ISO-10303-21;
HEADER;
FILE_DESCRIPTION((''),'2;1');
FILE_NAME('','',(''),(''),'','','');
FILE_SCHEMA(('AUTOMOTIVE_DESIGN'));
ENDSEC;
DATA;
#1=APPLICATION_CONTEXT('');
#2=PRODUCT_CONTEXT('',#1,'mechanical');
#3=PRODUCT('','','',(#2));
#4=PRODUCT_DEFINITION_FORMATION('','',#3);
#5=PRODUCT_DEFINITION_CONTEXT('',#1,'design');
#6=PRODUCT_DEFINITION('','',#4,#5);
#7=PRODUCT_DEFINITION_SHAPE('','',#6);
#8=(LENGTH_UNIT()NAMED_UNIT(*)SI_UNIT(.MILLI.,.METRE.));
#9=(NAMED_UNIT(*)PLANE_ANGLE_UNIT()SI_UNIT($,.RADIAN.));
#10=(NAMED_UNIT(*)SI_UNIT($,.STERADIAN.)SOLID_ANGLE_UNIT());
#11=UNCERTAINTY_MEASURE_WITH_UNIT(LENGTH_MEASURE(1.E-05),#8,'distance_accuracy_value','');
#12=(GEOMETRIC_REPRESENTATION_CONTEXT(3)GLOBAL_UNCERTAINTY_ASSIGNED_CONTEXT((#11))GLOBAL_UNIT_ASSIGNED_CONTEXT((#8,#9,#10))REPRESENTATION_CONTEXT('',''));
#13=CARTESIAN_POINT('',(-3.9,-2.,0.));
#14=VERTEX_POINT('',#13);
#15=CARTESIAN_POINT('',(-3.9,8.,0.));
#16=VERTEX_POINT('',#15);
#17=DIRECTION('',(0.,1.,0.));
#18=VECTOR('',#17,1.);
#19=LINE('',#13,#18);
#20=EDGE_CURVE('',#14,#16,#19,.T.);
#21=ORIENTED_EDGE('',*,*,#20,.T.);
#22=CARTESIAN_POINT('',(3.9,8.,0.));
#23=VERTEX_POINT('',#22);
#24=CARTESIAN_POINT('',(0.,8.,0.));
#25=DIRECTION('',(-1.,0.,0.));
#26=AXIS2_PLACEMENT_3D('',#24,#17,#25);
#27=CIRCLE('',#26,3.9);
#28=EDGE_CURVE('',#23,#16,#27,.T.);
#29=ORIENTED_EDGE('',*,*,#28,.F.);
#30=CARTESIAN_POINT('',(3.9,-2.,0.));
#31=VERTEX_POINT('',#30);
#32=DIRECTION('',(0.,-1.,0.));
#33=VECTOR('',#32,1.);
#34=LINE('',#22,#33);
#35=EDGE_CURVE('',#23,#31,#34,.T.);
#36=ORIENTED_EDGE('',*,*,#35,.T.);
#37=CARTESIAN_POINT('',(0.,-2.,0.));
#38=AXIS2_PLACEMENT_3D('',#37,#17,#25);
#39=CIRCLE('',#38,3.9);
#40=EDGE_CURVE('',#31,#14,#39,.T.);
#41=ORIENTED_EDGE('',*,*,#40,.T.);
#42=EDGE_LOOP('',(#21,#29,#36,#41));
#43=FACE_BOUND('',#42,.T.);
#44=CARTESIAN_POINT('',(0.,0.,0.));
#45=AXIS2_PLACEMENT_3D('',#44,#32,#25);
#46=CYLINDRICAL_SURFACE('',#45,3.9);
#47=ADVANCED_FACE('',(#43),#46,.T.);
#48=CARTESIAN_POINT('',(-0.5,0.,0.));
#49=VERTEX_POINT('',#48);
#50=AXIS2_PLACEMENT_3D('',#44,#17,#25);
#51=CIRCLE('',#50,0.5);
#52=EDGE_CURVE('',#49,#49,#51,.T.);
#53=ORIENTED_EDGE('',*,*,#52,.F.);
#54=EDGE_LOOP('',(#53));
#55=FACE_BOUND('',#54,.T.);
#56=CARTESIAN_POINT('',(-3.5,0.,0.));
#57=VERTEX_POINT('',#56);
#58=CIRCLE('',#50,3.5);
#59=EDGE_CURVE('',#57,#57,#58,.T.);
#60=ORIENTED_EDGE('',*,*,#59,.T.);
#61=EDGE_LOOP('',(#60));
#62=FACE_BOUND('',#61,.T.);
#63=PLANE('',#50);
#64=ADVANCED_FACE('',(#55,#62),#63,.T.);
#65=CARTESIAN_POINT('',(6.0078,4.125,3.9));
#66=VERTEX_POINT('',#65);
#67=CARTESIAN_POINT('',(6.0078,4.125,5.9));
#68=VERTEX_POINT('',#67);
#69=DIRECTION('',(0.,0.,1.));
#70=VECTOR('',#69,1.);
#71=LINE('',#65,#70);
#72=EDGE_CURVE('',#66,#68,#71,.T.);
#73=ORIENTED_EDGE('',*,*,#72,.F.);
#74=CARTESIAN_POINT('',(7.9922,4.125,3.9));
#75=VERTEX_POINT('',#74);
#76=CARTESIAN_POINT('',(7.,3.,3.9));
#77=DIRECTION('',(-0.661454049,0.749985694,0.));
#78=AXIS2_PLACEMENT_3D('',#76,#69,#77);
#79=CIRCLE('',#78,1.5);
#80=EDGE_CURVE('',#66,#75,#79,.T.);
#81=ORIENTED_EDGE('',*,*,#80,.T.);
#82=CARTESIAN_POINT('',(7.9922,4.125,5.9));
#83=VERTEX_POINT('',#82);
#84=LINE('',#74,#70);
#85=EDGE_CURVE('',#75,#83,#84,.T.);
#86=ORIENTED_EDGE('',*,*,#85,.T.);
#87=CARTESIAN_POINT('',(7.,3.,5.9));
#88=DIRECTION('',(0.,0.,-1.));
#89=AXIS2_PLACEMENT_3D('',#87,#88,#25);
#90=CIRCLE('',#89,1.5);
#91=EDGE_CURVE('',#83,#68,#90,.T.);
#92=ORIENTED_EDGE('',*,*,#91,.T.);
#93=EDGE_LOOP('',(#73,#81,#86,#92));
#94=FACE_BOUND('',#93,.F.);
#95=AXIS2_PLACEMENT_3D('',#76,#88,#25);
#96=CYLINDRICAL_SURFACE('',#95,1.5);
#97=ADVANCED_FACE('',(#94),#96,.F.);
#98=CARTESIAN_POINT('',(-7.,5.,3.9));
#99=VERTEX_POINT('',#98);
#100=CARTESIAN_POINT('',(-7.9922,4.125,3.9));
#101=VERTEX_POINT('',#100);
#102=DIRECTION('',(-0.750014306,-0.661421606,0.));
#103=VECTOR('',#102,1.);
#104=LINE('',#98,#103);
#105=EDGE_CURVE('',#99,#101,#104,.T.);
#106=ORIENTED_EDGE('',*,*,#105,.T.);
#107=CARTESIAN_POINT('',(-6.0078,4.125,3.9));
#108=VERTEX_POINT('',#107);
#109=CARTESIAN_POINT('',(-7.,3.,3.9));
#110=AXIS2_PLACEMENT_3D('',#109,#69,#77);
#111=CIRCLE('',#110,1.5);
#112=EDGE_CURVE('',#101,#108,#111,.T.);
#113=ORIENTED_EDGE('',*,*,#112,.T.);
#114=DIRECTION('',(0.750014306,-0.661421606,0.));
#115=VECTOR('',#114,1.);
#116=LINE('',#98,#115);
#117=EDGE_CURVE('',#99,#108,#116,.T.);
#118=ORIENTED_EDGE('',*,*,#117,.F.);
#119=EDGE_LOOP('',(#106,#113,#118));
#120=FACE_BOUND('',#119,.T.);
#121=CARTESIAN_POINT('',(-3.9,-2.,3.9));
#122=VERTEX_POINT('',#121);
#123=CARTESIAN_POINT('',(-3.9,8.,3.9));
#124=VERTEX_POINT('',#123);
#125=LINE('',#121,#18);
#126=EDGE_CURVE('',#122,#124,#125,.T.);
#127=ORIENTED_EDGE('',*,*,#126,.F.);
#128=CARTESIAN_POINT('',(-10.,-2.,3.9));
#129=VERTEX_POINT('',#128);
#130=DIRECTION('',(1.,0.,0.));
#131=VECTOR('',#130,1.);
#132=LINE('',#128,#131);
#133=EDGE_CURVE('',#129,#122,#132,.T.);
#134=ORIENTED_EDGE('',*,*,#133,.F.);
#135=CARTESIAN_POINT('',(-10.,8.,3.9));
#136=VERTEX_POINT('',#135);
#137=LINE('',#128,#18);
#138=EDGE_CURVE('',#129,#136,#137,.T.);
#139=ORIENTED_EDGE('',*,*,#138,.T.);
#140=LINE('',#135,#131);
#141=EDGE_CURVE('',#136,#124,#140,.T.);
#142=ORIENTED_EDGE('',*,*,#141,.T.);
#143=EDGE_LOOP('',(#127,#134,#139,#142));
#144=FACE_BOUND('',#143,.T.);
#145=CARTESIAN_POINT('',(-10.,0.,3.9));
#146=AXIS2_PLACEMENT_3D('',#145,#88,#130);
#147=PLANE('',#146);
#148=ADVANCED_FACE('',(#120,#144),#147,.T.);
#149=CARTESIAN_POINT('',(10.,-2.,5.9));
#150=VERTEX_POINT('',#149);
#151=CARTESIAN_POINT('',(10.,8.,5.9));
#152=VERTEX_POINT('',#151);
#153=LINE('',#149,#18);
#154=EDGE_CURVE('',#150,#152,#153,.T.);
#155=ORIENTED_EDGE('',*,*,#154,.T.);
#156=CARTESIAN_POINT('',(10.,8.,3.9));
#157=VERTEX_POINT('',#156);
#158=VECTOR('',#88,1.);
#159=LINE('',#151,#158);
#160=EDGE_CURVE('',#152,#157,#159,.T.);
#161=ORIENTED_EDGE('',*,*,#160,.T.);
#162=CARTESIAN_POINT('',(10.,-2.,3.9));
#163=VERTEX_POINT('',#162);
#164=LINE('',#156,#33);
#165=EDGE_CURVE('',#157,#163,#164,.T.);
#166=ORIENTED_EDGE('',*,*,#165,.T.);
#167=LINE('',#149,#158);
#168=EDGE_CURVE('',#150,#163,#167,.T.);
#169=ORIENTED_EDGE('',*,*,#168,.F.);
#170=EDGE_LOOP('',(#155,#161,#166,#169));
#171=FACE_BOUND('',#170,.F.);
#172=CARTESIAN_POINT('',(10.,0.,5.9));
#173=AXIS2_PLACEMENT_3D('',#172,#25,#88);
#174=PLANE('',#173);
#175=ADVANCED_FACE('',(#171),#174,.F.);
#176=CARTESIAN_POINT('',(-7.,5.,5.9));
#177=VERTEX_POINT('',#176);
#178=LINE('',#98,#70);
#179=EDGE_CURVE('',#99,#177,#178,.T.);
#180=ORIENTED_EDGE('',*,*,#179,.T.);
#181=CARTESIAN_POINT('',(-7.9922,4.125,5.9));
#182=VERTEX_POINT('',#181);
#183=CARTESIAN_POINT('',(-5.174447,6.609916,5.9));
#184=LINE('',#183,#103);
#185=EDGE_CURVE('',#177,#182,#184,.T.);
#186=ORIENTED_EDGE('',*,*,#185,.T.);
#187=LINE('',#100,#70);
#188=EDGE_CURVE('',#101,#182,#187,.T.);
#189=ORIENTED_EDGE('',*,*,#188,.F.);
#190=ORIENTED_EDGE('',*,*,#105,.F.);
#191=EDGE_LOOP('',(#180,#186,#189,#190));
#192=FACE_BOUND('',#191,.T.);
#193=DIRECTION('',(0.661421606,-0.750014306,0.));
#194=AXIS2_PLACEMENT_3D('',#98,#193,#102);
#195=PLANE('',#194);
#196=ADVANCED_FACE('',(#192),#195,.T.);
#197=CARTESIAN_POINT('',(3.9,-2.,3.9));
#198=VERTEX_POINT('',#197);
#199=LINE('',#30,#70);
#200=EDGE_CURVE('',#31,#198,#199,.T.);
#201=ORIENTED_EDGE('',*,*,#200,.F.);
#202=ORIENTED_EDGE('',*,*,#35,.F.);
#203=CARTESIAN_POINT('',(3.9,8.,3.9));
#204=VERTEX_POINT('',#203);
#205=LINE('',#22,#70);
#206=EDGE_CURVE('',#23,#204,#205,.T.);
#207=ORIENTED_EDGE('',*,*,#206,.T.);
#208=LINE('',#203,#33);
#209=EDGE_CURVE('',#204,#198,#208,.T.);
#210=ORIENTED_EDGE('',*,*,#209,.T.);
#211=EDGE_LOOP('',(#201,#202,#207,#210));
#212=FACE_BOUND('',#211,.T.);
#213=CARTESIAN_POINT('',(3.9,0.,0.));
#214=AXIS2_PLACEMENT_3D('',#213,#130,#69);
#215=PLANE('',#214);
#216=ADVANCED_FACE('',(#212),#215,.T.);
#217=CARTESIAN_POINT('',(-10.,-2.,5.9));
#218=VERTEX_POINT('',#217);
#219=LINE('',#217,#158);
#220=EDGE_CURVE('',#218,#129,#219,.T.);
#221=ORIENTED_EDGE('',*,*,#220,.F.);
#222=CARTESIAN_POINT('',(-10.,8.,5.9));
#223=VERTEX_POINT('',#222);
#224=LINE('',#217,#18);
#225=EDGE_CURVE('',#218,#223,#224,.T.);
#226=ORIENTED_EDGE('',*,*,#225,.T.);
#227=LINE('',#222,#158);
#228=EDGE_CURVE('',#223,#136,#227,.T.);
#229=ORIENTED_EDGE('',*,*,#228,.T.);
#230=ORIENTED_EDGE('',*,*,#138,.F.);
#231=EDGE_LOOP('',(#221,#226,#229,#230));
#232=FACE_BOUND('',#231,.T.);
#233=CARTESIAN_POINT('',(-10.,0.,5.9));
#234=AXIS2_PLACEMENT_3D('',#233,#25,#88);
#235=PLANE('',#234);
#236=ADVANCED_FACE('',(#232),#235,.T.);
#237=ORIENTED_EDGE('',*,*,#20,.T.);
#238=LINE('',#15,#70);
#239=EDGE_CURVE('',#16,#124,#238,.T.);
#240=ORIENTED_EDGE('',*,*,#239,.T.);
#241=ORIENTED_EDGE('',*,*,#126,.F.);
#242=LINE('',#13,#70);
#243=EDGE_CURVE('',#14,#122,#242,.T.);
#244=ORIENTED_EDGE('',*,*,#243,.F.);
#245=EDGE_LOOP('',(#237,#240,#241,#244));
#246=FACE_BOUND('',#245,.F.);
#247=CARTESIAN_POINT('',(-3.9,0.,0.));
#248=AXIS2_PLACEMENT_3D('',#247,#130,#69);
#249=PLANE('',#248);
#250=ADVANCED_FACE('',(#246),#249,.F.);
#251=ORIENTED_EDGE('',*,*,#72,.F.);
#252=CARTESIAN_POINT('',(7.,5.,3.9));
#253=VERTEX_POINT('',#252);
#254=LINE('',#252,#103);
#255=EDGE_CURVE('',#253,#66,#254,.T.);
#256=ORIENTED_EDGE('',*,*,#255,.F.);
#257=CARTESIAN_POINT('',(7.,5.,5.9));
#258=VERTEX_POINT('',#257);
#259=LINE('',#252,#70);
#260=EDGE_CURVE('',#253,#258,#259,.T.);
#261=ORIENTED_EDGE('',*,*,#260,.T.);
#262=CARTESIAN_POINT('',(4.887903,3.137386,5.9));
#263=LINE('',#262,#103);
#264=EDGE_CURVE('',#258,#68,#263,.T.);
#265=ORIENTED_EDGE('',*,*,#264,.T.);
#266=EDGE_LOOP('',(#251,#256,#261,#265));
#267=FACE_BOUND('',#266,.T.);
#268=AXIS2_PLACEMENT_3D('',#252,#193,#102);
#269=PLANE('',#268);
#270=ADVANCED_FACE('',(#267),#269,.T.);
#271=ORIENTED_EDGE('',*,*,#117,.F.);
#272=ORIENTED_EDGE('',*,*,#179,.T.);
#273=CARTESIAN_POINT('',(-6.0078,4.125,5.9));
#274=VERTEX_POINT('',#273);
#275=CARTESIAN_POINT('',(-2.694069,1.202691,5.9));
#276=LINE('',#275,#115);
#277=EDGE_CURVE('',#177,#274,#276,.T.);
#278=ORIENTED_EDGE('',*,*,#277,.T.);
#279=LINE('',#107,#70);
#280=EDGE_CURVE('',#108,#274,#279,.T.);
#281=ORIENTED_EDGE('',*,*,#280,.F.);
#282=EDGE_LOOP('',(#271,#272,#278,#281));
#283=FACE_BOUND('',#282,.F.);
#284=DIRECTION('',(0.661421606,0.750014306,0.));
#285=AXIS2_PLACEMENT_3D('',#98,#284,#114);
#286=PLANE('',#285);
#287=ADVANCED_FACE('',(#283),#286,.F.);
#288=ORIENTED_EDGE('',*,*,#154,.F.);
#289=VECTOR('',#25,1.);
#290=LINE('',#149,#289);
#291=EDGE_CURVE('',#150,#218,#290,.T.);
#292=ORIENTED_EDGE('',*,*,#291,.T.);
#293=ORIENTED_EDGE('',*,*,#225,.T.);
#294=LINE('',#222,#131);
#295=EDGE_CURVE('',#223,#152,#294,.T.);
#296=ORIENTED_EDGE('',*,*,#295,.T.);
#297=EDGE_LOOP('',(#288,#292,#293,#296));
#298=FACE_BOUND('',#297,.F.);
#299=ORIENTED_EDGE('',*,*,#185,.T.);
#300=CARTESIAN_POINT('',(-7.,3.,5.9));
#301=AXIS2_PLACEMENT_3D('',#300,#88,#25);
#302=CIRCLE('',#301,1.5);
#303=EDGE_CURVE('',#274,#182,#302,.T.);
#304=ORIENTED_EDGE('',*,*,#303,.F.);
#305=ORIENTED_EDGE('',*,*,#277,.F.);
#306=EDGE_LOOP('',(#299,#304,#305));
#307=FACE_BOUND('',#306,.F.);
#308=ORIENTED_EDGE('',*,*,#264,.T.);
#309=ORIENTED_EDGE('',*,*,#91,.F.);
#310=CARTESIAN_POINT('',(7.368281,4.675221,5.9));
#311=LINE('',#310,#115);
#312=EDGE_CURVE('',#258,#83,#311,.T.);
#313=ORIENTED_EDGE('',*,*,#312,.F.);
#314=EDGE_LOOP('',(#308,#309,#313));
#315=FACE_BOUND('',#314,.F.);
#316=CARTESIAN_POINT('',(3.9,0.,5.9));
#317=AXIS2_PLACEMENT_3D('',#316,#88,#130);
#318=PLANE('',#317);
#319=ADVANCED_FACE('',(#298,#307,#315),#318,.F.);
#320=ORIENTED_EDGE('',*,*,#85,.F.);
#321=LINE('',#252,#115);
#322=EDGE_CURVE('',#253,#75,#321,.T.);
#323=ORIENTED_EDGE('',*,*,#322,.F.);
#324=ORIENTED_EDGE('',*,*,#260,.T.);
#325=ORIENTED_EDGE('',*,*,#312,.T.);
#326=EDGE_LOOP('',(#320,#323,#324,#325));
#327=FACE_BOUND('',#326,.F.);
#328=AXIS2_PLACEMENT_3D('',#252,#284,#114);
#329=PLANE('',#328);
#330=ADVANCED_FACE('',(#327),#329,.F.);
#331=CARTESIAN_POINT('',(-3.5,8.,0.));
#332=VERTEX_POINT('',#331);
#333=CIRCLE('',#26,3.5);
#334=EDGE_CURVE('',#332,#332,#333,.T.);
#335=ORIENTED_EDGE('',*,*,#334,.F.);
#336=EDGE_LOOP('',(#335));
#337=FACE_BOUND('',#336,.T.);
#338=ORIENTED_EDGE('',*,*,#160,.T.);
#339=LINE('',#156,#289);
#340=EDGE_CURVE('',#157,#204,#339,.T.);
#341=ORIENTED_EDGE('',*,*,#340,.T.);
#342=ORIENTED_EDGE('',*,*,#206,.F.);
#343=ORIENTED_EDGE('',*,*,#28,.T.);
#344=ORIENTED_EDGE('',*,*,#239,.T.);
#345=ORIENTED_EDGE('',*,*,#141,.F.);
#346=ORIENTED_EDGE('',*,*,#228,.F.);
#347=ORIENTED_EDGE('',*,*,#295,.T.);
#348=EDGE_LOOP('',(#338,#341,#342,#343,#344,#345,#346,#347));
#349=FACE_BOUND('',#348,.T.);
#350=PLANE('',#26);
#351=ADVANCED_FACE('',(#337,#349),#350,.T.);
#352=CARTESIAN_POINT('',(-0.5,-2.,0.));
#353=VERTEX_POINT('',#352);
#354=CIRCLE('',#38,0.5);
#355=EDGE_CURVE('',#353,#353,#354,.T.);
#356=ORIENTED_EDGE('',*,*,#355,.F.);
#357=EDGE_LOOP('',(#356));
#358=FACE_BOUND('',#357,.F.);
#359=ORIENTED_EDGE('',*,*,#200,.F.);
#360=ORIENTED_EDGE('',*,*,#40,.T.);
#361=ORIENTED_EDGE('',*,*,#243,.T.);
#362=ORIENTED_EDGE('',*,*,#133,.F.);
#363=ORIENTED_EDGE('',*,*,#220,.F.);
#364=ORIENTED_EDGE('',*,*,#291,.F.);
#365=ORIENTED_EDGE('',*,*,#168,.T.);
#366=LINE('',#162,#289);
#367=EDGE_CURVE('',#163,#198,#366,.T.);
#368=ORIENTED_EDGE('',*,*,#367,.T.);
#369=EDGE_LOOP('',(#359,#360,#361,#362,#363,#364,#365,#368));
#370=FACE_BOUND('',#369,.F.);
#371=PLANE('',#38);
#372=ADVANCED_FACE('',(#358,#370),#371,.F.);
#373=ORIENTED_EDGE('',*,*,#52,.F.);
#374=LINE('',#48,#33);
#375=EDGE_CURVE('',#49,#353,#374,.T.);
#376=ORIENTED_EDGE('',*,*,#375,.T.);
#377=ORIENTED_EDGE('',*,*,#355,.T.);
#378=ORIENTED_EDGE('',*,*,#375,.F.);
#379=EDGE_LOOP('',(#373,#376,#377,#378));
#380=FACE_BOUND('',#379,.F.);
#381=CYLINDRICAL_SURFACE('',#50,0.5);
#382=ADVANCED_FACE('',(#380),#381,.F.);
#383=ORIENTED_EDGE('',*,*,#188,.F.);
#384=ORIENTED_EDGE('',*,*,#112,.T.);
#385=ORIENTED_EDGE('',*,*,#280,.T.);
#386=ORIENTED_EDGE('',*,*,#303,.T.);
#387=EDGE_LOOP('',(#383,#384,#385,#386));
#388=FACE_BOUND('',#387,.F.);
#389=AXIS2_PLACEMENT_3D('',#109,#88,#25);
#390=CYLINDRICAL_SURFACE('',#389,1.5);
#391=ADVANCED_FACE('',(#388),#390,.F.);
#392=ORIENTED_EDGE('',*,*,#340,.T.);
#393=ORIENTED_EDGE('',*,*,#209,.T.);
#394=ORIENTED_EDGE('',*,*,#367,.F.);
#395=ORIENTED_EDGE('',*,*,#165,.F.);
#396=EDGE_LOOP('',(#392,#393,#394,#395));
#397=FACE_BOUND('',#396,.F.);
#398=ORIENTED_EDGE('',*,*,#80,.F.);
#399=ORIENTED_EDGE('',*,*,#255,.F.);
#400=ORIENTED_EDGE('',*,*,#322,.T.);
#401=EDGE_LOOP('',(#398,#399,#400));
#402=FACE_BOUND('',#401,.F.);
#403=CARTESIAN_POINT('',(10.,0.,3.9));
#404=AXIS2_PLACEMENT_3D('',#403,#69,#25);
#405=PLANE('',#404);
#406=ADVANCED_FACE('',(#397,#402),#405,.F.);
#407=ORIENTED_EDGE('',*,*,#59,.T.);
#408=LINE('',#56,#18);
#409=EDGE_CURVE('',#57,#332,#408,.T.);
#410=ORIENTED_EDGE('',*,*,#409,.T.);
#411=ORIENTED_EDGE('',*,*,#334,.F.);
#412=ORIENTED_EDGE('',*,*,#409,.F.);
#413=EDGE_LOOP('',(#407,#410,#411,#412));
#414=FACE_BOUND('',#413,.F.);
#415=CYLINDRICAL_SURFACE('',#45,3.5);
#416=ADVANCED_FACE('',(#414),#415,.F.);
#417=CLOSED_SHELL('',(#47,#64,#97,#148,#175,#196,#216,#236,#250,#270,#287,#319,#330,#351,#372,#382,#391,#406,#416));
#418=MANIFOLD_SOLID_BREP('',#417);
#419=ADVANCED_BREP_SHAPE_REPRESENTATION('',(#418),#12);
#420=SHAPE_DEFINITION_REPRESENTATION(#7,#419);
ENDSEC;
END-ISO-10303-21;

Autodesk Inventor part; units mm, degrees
ref_plane "YZ Plane" through (0, 0, 0) normal (1, 0, 0) x (0, 1, 0)
ref_plane "XZ Plane" through (0, 0, 0) normal (0, 1, 0) x (-1, 0, 0)
ref_plane "XY Plane" through (0, 0, 0) normal (0, 0, 1) x (1, 0, 0)
sketch "Sketch1" plane through (0, 0, 0) normal (0, 1, 0) x (-1, 0, 0)
  circle A0 centre (0, 0) radius 3.5
  circle A1 centre (0, 0) radius 3.9
  circle A2 centre (0, 0) radius 0.5
  line L0 (3.9, 0) -> (3.9, 3.9)
  line L1 (3.9, 3.9) -> (0, 3.9)
  line L2 (-3.9, 0) -> (-3.9, 3.9)
  line L3 (-3.9, 3.9) -> (0, 3.9)
  line L4 (3.9, 3.9) -> (3.9, 5.9)
  line L5 (3.9, 5.9) -> (-3.9, 5.9)
  line L6 (-3.9, 5.9) -> (-3.9, 3.9)
  line L7 (3.9, 5.9) -> (10, 5.9)
  line L8 (10, 5.9) -> (10, 3.9)
  line L9 (10, 3.9) -> (3.9, 3.9)
  line L10 (-3.9, 5.9) -> (-10, 5.9)
  line L11 (-10, 5.9) -> (-10, 3.9)
  line L12 (-10, 3.9) -> (-3.9, 3.9)
  dimension "d0" = 7
  dimension "d1" = 7.8
  dimension "d2" = 1
  dimension "d7" = 2
  dimension "d10" = 20
extrude "Extrusion1" add sketch "Sketch1" along normal blind 8 contours A1 | A1 L1 L0 | L3 L6 L5 L4 L1 | A1 L2 L3 | L4 L7 L8 L9 | L12 L11 L10 L6
extrude "Extrusion2" add sketch "Sketch1" against normal blind 2 contours A0 | A1 | A1 L1 L0 | L3 L6 L5 L4 L1 | A1 L2 L3 | L4 L7 L8 L9 | L12 L11 L10 L6
sketch "Sketch2" plane through (10, 8, 3.9) normal (0, 0, -1) x (-1, 0, 0)
  circle A0 centre (3, -5) radius 1.5
  circle A1 centre (17, -5) radius 1.5
  line L0 (3, -5) -> (17, -5) construction
  line L1 (0, -10) -> (0, 0) construction
  line L2 (20, -10) -> (20, 0) construction
  line L3 (0, 0) -> (6.1, 0) projected
  line L4 (3, -3.5) -> (3, -3) construction
  line L5 (3, -3) -> (3.9922, -3.875)
  line L6 (3, -3) -> (2.0078, -3.875)
  line L7 (17, -3.5) -> (17, -3) construction
  line L8 (17, -3) -> (16.0078, -3.875)
  line L9 (17, -3) -> (17.9922, -3.875)
  point P0 (10, -8)
  dimension "d11" = 3
  dimension "d12" = 3
  dimension "d13" = 3
  dimension "d14" = 3
  dimension "d15" = 5
  dimension "d18" = 0.5
  dimension "d19" = 0.5
extrude "Extrusion3" cut sketch "Sketch2" against normal through all
equation "\"d13\" = d12"
equation "\"d14\" = d11"
equation "\"d19\" = d18"
properties part number "w_3DPrint"
